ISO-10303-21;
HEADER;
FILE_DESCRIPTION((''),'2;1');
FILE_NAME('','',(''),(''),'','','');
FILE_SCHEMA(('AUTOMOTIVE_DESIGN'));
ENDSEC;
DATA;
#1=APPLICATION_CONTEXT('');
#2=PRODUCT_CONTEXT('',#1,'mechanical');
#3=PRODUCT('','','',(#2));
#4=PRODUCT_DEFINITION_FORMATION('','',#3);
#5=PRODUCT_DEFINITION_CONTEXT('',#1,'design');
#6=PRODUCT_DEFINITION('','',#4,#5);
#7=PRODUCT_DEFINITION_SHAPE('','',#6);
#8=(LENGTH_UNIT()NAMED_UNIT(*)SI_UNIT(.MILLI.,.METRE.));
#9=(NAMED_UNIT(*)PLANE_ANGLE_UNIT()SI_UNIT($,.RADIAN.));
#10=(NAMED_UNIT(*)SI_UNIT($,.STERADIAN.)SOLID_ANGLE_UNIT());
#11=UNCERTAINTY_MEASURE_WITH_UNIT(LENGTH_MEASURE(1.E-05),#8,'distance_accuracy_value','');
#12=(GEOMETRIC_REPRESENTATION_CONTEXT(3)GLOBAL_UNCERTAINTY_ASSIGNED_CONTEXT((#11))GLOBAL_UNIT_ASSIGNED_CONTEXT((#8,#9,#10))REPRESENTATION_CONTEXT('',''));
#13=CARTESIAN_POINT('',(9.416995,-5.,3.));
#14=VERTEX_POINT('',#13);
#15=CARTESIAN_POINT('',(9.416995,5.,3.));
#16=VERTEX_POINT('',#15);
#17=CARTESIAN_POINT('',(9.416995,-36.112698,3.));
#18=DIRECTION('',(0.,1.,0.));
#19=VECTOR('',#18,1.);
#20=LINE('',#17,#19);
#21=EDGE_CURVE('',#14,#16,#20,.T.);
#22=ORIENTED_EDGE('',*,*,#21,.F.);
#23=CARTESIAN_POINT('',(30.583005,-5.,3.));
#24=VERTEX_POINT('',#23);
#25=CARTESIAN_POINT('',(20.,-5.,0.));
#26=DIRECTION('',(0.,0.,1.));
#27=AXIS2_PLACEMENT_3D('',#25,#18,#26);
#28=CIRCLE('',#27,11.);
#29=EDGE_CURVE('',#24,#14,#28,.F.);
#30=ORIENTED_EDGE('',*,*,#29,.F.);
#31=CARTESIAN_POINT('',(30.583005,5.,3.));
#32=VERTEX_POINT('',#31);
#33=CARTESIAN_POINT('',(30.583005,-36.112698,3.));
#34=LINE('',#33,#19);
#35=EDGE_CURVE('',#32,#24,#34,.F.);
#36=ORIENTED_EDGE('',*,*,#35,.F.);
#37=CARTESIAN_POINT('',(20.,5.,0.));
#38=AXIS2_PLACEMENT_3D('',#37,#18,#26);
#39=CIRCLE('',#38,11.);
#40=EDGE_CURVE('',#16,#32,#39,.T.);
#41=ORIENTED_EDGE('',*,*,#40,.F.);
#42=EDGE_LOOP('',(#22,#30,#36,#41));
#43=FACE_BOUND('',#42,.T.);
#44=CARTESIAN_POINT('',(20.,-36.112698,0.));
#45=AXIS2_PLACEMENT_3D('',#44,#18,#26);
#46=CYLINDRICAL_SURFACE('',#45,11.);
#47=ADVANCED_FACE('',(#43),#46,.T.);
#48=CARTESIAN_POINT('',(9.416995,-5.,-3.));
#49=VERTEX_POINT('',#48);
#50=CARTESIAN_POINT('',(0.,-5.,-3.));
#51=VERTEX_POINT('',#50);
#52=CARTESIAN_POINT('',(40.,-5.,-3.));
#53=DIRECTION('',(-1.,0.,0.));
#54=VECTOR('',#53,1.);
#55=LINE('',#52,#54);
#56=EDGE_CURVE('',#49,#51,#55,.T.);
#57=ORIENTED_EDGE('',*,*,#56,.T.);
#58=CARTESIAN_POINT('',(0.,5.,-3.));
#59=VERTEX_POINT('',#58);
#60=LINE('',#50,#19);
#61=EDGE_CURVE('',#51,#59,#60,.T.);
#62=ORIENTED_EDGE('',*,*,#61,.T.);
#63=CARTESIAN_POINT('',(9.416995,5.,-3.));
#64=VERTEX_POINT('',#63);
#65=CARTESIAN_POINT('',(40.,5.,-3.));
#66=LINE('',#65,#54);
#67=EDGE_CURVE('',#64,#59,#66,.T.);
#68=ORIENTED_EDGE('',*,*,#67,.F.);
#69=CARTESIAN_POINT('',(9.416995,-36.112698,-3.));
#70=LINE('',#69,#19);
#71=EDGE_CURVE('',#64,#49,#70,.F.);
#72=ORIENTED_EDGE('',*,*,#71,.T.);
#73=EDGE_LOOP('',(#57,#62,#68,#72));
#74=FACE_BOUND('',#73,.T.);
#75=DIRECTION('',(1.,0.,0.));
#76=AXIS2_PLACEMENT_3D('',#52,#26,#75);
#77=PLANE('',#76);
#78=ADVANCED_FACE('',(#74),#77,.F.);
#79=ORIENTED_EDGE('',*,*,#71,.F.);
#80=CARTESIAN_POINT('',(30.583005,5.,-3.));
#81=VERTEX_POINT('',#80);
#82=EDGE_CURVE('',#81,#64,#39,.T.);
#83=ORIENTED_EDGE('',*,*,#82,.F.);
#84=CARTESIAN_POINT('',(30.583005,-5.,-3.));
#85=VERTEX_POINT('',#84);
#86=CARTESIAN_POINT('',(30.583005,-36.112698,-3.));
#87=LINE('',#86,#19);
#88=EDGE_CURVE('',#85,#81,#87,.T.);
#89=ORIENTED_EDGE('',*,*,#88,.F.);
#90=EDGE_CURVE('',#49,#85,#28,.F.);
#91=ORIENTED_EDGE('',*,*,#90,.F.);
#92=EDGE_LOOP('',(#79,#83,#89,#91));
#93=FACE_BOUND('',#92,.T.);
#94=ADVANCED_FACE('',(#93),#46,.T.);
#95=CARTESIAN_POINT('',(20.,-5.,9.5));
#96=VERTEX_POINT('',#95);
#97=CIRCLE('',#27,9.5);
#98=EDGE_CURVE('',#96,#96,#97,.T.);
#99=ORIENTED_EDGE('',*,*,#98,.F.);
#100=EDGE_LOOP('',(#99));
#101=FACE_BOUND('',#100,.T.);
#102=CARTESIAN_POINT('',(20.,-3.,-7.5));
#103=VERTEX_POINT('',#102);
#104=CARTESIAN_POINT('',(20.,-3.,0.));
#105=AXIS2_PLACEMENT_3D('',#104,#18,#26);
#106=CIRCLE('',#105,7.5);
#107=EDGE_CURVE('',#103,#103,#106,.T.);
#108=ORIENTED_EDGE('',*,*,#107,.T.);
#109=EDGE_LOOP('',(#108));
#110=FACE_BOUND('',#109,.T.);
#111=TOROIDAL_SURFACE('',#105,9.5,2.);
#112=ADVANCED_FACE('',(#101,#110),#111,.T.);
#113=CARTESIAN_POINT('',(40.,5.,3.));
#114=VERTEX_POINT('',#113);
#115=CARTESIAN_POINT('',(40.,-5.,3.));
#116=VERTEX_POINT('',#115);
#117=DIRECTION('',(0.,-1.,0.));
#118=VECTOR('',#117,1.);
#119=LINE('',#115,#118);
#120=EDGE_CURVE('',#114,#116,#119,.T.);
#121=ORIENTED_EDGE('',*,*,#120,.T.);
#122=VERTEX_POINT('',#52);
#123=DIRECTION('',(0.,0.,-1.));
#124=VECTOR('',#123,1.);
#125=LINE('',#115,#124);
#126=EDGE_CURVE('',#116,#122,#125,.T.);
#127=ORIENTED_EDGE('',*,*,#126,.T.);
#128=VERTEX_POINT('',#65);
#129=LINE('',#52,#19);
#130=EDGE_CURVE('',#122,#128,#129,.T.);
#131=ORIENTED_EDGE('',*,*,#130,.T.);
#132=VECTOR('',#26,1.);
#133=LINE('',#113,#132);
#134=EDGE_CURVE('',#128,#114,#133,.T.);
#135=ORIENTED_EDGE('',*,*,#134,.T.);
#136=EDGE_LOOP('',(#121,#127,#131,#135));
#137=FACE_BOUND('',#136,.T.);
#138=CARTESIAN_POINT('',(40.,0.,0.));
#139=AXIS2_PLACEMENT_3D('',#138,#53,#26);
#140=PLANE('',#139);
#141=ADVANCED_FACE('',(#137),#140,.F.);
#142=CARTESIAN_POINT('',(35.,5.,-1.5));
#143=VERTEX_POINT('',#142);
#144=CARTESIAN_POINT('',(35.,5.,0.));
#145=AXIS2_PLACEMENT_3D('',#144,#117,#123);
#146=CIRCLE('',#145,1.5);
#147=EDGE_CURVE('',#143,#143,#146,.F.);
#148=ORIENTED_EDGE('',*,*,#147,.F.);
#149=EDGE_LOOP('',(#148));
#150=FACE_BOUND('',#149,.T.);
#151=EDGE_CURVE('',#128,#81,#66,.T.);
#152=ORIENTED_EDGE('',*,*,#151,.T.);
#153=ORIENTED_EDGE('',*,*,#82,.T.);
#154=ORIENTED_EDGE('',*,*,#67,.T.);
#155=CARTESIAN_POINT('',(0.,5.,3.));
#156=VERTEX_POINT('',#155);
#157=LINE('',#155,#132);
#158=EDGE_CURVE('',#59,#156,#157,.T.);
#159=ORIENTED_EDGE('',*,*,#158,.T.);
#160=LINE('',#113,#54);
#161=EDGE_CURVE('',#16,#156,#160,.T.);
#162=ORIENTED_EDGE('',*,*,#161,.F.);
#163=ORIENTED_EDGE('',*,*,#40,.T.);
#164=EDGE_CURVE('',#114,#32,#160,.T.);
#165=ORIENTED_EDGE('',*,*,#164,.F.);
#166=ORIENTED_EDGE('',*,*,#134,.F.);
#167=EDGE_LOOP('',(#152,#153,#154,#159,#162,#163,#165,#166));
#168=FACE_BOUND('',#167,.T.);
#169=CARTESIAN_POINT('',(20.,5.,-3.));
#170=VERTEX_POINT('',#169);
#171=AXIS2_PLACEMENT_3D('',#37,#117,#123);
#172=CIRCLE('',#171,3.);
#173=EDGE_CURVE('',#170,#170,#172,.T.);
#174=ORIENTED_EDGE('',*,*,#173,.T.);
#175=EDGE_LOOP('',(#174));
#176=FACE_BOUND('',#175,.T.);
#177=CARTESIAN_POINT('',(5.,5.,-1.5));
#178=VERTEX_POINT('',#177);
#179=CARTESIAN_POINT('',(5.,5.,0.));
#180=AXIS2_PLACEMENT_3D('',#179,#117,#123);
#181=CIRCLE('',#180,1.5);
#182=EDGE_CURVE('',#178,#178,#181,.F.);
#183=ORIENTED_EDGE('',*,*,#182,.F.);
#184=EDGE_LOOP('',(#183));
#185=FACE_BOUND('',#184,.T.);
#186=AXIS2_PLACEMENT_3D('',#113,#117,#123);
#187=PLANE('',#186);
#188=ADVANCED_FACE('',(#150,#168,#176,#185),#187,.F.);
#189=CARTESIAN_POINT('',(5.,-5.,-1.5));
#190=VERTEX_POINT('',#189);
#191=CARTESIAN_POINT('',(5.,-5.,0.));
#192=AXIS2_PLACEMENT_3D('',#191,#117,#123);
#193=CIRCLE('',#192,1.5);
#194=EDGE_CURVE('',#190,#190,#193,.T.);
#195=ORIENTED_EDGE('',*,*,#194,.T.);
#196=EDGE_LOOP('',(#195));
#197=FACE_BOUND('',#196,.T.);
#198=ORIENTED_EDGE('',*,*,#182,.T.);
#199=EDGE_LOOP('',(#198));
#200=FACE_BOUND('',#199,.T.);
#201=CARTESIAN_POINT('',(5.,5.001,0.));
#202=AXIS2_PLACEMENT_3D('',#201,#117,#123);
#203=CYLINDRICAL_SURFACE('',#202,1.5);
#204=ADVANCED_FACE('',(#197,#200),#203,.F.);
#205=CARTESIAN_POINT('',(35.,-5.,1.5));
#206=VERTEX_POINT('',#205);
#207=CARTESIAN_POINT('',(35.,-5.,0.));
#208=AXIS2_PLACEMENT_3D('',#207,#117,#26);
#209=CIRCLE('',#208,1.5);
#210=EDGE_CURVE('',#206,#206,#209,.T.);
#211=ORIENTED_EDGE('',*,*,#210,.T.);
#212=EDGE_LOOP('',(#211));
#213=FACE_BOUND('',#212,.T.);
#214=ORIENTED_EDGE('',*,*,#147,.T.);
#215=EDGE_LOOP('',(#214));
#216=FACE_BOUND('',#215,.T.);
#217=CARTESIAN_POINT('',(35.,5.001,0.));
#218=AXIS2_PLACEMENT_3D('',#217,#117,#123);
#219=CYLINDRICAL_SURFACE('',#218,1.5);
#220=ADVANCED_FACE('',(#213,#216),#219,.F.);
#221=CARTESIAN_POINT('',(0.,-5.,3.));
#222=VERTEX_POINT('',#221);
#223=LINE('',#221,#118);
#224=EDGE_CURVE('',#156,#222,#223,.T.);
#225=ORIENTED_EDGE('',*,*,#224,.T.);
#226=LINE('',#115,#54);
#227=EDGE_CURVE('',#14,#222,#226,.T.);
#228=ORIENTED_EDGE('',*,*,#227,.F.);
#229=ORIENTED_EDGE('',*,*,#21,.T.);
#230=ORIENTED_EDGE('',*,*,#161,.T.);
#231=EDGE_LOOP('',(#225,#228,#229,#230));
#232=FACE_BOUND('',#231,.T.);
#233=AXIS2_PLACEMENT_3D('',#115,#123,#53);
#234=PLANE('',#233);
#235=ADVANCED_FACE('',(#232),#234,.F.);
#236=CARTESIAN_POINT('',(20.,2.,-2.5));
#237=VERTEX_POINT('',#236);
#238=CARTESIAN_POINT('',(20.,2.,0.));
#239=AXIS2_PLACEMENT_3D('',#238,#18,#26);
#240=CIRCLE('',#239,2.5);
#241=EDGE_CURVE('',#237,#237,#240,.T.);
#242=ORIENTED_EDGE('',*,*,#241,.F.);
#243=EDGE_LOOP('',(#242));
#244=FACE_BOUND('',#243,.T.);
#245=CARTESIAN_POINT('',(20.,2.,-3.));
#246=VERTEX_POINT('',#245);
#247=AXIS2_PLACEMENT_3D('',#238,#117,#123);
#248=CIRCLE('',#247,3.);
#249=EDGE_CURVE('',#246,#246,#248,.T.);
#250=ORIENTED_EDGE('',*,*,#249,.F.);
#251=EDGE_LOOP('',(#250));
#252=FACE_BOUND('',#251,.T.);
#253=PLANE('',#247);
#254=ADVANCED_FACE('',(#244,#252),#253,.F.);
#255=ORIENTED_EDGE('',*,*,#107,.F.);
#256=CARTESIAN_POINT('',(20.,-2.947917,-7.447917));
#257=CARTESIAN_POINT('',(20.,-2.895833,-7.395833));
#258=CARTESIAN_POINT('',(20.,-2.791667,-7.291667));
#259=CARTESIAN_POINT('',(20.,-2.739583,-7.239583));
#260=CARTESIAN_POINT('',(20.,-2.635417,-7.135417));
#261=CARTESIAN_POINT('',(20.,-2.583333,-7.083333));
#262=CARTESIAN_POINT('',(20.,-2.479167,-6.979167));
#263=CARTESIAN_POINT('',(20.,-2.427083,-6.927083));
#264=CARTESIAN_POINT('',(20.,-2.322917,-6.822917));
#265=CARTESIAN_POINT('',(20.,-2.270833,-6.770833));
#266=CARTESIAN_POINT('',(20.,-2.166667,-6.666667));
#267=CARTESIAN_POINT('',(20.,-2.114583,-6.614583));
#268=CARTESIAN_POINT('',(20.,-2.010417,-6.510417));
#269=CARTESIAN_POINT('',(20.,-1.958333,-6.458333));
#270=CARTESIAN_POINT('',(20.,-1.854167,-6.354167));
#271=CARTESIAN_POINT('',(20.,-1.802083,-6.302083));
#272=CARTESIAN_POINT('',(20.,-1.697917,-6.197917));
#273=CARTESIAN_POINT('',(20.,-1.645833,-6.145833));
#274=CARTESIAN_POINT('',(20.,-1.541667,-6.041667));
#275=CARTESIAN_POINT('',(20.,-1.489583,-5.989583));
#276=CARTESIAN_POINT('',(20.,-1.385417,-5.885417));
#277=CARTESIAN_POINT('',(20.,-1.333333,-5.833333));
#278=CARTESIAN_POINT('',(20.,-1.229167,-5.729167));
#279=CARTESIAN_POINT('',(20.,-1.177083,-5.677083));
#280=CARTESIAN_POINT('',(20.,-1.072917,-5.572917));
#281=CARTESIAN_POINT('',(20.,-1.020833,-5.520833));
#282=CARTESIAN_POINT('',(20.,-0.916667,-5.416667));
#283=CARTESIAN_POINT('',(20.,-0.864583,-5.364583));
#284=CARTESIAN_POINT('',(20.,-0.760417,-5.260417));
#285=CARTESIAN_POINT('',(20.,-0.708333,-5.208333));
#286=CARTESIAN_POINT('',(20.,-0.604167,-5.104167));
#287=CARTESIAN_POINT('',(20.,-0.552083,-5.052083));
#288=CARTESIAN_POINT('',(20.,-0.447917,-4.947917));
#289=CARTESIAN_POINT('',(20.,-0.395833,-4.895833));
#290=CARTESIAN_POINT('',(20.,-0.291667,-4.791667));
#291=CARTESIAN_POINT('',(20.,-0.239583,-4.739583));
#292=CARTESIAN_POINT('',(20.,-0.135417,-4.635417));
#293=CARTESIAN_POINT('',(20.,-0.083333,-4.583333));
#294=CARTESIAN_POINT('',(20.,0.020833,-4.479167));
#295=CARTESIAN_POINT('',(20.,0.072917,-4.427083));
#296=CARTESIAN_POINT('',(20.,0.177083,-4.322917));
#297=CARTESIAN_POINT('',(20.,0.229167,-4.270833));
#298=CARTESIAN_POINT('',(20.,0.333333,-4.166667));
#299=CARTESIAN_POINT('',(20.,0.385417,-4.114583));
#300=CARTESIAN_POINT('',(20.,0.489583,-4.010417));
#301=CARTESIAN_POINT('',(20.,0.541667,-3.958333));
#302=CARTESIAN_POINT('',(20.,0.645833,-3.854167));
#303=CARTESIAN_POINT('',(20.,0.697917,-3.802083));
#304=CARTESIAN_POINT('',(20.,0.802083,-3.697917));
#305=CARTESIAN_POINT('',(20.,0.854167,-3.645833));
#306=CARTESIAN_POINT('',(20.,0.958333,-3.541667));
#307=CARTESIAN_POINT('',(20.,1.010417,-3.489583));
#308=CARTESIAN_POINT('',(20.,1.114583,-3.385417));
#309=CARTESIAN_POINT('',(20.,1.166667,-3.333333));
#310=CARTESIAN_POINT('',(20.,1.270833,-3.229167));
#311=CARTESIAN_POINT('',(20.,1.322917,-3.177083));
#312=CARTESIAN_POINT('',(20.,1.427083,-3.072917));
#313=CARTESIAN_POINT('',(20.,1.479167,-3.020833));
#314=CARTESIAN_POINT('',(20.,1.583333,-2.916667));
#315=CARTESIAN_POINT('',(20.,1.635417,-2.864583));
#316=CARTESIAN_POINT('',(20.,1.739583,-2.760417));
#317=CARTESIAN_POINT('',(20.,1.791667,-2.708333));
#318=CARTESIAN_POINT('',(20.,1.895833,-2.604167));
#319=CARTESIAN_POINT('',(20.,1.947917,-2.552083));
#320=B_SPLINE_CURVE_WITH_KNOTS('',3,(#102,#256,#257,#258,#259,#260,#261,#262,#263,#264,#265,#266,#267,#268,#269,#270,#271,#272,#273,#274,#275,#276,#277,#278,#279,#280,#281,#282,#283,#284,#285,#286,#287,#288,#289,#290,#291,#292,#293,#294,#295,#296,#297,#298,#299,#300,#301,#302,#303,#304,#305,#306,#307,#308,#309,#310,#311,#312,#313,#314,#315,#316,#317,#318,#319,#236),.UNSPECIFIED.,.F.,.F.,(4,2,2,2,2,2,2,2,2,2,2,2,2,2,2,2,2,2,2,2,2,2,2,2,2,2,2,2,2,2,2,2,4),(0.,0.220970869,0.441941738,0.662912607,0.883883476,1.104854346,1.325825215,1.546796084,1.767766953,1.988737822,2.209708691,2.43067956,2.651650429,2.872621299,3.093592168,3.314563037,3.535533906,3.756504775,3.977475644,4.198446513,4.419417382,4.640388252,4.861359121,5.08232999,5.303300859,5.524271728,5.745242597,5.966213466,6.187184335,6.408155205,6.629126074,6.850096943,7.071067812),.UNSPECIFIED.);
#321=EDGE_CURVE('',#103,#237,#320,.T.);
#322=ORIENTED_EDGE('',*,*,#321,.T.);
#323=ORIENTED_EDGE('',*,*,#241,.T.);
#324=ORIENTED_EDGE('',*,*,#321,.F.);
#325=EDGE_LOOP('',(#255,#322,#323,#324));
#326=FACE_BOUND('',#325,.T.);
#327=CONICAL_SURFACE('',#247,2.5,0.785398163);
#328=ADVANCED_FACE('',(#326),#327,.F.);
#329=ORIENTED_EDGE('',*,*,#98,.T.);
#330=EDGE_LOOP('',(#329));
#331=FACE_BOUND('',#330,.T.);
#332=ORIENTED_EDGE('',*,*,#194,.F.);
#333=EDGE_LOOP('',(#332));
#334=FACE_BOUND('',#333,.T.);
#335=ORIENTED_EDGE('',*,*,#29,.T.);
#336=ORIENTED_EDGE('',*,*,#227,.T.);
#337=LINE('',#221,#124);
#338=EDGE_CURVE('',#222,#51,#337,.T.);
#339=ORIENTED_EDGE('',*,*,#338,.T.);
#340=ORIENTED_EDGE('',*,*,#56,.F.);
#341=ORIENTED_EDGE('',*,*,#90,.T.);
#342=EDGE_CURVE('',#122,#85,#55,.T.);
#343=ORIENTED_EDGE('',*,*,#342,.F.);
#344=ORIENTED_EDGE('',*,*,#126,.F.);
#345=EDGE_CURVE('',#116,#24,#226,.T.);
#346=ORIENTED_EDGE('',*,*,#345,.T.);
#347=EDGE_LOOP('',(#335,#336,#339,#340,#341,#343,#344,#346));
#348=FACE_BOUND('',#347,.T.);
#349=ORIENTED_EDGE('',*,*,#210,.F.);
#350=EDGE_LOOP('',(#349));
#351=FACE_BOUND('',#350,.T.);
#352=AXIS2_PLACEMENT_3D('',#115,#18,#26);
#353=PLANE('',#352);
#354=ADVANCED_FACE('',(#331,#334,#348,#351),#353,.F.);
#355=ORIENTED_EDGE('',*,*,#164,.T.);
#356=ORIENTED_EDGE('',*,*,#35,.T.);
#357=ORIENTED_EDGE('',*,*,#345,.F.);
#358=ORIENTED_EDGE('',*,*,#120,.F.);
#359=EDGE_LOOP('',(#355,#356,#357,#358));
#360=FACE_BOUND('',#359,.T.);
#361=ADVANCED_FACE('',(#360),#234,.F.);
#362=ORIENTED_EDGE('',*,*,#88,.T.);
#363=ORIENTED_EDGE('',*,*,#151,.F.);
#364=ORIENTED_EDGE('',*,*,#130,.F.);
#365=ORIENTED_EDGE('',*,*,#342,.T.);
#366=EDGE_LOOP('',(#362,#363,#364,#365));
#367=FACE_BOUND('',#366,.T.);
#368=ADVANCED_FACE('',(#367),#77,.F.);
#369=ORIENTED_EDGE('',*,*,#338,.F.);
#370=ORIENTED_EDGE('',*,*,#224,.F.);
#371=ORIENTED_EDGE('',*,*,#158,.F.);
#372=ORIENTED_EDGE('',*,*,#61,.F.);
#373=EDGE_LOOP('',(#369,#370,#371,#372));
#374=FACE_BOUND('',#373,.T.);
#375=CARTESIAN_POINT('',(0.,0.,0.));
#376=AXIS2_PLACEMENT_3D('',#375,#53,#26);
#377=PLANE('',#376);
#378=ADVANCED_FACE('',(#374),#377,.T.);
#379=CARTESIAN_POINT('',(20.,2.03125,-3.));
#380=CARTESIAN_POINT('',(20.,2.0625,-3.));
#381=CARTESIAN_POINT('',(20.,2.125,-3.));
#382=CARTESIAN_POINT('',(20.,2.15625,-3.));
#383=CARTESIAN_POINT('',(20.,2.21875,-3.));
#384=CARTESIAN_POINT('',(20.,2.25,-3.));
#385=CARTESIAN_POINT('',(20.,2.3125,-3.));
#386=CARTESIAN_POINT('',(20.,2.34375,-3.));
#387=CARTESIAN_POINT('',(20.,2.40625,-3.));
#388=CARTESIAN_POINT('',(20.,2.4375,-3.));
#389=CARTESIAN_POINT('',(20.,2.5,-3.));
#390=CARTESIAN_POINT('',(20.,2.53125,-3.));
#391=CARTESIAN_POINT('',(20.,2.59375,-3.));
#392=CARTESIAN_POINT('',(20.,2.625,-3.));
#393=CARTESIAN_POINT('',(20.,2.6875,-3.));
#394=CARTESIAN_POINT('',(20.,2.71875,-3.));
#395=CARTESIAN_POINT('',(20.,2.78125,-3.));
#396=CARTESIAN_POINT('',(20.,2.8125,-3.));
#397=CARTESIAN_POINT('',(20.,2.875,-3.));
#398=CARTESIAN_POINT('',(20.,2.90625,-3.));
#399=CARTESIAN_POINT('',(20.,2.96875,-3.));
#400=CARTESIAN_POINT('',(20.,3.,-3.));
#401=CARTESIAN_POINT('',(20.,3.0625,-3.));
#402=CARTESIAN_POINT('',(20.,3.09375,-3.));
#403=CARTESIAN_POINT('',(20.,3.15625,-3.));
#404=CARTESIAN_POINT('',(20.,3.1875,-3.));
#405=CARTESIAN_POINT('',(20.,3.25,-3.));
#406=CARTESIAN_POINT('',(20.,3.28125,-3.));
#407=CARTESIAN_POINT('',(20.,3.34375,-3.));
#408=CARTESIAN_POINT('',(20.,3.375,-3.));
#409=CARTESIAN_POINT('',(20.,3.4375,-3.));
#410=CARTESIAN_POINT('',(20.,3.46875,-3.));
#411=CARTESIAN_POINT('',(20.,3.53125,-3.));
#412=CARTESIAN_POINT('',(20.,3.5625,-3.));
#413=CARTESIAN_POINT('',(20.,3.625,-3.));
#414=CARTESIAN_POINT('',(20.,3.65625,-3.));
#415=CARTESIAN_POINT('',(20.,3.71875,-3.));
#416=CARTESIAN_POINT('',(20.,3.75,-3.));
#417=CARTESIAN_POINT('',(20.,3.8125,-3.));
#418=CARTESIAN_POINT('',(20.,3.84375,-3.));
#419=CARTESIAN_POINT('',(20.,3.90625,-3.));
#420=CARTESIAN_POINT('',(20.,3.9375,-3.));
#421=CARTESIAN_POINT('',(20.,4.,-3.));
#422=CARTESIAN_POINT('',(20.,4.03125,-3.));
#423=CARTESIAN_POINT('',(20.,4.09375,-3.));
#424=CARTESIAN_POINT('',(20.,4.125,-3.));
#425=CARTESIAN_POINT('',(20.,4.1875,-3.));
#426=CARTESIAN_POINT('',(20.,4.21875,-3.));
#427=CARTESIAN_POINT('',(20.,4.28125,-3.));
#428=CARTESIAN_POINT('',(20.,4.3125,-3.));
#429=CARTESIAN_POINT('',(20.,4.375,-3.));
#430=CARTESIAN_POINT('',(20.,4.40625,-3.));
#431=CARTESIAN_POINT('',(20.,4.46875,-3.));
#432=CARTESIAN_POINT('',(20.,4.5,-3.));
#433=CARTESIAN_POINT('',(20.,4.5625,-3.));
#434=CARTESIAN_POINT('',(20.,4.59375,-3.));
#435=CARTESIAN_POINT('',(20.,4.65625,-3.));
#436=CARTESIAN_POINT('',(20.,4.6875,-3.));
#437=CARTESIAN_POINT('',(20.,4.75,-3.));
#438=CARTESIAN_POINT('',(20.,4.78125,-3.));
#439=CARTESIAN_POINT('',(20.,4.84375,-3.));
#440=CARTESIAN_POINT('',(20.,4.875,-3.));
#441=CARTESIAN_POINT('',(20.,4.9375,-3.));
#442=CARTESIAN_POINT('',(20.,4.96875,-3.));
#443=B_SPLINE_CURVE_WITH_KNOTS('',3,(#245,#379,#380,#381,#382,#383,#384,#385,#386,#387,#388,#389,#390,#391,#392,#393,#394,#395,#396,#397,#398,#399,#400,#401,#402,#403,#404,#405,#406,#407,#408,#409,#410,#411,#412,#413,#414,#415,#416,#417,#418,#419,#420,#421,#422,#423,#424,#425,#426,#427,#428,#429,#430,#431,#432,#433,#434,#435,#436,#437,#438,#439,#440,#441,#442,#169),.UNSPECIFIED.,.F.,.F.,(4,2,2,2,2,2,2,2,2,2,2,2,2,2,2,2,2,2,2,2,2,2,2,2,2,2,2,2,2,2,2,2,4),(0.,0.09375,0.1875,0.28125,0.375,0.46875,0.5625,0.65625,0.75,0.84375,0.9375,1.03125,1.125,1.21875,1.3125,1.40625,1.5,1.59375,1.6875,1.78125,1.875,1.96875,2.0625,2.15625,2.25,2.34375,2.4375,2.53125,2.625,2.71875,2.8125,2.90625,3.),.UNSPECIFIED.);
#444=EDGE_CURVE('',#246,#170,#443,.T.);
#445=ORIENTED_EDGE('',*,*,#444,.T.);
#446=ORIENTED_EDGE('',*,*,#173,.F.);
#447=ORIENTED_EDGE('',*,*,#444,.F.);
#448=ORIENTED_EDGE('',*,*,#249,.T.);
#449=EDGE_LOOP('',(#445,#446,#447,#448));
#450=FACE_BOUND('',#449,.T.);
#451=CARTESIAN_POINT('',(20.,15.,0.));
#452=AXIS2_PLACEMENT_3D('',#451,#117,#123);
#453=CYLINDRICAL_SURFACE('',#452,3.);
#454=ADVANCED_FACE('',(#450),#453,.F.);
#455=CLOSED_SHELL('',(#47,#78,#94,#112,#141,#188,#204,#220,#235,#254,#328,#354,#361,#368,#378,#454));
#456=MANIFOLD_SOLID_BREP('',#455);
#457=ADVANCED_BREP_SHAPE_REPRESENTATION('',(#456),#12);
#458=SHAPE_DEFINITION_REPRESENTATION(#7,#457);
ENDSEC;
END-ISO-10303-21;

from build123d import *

# Parameters (mm, degrees)
SKETCH2_W           = 6
SKETCH2_H           = 10
BOSS_EXTRUDE1_DEPTH = 40
SKETCH3_R           = 11
BOSS_EXTRUDE2_DEPTH = 10
SKETCH4_R           = 7.5
CUT_EXTRUDE1_DEPTH  = 2
SKETCH6_R           = 3
CUT_EXTRUDE2_DEPTH  = 13
FILLET1_R           = 2
CUT_EXTRUDE3_REACH  = 44.673
SKETCH7_R           = 1.5


with BuildPart() as part:
    # Sketch2 → Boss-Extrude1 (new body)
    with BuildSketch(Plane(origin=(0, 0, 0), x_dir=(0, 0, -1), z_dir=(1, 0, 0))):
        Rectangle(SKETCH2_W, SKETCH2_H)
    extrude(amount=BOSS_EXTRUDE1_DEPTH)

    # Sketch3 → Boss-Extrude2 (add)
    with BuildSketch(Plane(origin=(0, 5, 0), x_dir=(1, 0, 0), z_dir=(0, 1, 0))):
        with Locations((20, 0)):
            Circle(SKETCH3_R)
    extrude(amount=-BOSS_EXTRUDE2_DEPTH)

    # Sketch4 → Cut-Extrude1 (cut)
    with BuildSketch(Plane(origin=(0, -5, 0), x_dir=(-1, 0, 0), z_dir=(0, -1, 0))):
        with Locations(Location((-20, 0, 0), (0, 0, 90))):
            Circle(SKETCH4_R)
    extrude(amount=-CUT_EXTRUDE1_DEPTH, mode=Mode.SUBTRACT)

    # Sketch5 → Cut-Revolve1 (revolve, cut)
    with BuildSketch(Plane(origin=(0, 0, 0), x_dir=(-1, 0, 0), z_dir=(0, 0, -1)), mode=Mode.PRIVATE) as cut_revolve1_sk:
        Polygon((-20, -3), (-27.5, -3), (-22.5, 2), (-20, 2), align=None)
    revolve(cut_revolve1_sk.sketch.rotate(Axis((20, 2, 0), (0, -1, 0)), 270), axis=Axis((20, 2, 0), (0, -1, 0)), mode=Mode.SUBTRACT)

    # Sketch6 → Cut-Extrude2 (cut)
    with BuildSketch(Plane.XZ.offset(-2)):
        with Locations(Location((20, 0, 0), (0, 0, 270))):
            Circle(SKETCH6_R)
    extrude(amount=-CUT_EXTRUDE2_DEPTH, mode=Mode.SUBTRACT)

    # Fillet1
    fillet1_edges = [part.edges().sort_by_distance(p)[0] for p in [
        (20, -5, 7.5),
    ]]
    fillet(fillet1_edges, radius=FILLET1_R - 0.0001)  # a hair under: the kernel refuses the full size

    # Sketch7 → Cut-Extrude3 (cut, up to next)
    with BuildSketch(Plane.XZ.offset(5), mode=Mode.PRIVATE) as cut_extrude3_sk1:
        with Locations(Location((5, 0, 0), (0, 0, 270))):
            Circle(SKETCH7_R)
    cut_extrude3_tool1 = extrude(cut_extrude3_sk1.sketch, amount=-CUT_EXTRUDE3_REACH, mode=Mode.PRIVATE) & part.part
    # Sketch7 → Cut-Extrude3 (cut, up to next)
    with BuildSketch(Plane.XZ.offset(5), mode=Mode.PRIVATE) as cut_extrude3_sk2:
        with Locations(Location((35, 0, 0), (0, 0, 270))):
            Circle(SKETCH7_R)
    cut_extrude3_tool2 = extrude(cut_extrude3_sk2.sketch, amount=-CUT_EXTRUDE3_REACH, mode=Mode.PRIVATE) & part.part
    add(cut_extrude3_tool1.solids().sort_by_distance((5, -5, 0))[0], mode=Mode.SUBTRACT)
    add(cut_extrude3_tool2.solids().sort_by_distance((35, -5, 0))[0], mode=Mode.SUBTRACT)


solid = part.part
